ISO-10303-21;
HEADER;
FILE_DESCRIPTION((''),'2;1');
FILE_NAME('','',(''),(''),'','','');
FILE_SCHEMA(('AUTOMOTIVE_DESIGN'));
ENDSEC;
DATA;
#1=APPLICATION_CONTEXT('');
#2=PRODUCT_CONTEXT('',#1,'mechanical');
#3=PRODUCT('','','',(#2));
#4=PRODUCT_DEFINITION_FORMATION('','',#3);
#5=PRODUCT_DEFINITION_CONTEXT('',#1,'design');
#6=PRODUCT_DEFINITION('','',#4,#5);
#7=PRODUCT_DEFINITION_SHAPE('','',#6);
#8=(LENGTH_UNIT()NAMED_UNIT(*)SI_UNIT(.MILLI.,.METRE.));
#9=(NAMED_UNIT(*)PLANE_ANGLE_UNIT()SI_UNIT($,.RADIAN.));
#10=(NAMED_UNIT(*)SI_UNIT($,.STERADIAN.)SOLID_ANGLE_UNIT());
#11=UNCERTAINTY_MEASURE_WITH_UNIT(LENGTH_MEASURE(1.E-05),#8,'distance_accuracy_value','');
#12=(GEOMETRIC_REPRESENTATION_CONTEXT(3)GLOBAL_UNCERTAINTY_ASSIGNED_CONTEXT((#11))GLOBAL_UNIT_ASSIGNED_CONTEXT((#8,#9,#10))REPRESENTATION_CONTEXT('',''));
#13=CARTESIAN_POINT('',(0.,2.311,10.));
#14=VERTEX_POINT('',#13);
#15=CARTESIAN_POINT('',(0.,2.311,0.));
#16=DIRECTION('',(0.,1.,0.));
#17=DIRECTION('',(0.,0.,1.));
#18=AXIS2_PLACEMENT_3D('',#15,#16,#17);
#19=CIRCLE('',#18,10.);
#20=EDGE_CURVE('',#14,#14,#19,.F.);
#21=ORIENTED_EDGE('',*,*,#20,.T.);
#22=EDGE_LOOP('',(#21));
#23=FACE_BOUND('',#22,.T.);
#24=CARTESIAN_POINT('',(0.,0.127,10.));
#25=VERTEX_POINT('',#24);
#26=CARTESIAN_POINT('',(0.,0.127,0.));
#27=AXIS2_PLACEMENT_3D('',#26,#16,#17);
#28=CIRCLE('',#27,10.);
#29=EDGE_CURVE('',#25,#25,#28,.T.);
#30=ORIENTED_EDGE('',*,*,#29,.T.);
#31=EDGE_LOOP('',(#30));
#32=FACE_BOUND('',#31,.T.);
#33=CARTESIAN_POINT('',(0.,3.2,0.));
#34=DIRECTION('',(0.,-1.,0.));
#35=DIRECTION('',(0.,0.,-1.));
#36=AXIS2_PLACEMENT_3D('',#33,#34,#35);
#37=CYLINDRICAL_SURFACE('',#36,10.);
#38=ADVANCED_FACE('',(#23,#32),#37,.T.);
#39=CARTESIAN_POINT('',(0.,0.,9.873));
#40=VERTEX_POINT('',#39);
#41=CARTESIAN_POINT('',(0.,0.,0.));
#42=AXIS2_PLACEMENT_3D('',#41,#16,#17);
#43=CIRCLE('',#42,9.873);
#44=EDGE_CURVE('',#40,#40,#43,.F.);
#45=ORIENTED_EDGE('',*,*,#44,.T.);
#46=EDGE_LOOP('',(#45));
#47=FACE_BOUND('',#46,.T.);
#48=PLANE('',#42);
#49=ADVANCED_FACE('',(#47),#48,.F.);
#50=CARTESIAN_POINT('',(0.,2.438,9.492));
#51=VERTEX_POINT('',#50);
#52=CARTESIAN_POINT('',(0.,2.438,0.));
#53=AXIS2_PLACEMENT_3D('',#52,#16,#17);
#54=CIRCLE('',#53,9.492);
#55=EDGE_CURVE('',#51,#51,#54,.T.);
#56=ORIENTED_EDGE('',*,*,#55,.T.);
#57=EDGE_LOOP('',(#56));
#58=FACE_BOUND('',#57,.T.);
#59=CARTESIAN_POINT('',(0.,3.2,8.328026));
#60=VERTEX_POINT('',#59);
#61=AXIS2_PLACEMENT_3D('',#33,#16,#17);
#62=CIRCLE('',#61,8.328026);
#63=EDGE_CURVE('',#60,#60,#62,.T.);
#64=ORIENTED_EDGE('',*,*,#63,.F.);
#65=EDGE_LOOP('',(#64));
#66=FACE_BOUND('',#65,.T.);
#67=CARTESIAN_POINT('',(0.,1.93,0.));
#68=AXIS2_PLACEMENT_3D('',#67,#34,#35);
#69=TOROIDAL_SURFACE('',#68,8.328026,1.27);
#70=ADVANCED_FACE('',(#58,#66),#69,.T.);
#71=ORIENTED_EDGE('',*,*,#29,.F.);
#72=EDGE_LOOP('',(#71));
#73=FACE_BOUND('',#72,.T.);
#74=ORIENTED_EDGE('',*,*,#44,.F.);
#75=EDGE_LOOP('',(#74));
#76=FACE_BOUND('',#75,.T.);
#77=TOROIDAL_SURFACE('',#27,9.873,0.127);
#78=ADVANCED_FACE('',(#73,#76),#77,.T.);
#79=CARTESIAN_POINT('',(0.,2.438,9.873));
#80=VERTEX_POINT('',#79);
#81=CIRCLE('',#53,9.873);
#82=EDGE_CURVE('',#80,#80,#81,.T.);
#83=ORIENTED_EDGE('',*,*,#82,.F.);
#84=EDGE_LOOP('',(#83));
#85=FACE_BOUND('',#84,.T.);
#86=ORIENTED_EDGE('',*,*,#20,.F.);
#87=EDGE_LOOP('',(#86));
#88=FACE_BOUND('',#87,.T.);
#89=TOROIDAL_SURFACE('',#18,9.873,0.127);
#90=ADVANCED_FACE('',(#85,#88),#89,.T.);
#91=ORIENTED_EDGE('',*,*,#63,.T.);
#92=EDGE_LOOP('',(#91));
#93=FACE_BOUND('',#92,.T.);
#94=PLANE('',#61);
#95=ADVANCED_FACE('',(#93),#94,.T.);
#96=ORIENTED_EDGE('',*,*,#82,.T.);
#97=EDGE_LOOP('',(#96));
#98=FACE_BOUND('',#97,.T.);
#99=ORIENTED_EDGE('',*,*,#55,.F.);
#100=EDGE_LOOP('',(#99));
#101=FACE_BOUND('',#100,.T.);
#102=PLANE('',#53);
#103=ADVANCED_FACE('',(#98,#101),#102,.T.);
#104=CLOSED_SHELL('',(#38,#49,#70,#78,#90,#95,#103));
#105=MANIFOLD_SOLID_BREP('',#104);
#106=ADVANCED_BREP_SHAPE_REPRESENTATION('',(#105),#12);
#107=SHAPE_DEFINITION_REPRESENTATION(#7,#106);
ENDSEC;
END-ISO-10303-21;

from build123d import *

# Parameters (mm, degrees)
SKETCH1_R           = 10
BOSS_EXTRUDE1_DEPTH = 3.2
CUT_EXTRUDE1_START  = -0.762
SKETCH2_R           = 10
SKETCH2_R_2         = 9.492
CUT_EXTRUDE1_DEPTH  = 0.762
FILLET3_R           = 1.27
FILLET2_R           = 0.127


with BuildPart() as part:
    # Sketch1 → Boss-Extrude1 (new body)
    with BuildSketch(Plane(origin=(0, 0, 0), x_dir=(1, 0, 0), z_dir=(0, 1, 0))):
        with Locations(Location((0, 0, 0), (0, 0, 270))):
            Circle(SKETCH1_R)
    extrude(amount=BOSS_EXTRUDE1_DEPTH)

    # Sketch2 → Cut-Extrude1 (cut)
    with BuildSketch(Plane(origin=(0, 3.2, 0), x_dir=(1, 0, 0), z_dir=(0, 1, 0)).offset(CUT_EXTRUDE1_START)):
        with Locations(Location((0, 0, 0), (0, 0, 270))):
            Circle(SKETCH2_R)
        with Locations(Location((0, 0, 0), (0, 0, 270))):
            Circle(SKETCH2_R_2, mode=Mode.SUBTRACT)
    extrude(amount=CUT_EXTRUDE1_DEPTH, mode=Mode.SUBTRACT)

    # Fillet3
    # the kernel refuses this fillet: 1.27 mm, written as the material it takes off along each edge
    with BuildSketch(Plane(origin=(0, 3.2, 0), x_dir=(0, 0, 1), z_dir=(-1, 0, 0))) as fillet3_piece_1:
        with BuildLine():
            CenterArc((8.328025773, -1.27), FILLET3_R, 23.578178478, 66.421821522)
            Line((8.328025773, 0), (8.328025773, 0.0254))
            Line((8.328025773, 0.0254), (9.492, 0.0254))
            Line((9.492, 0.0254), (9.5174, 0))
            ThreePointArc((9.5174, 0), (9.5174, -0.381), (9.515279485, -0.75184))
            Line((9.515279485, -0.75184), (9.492, -0.762))
        make_face()
    revolve(axis=Axis((0, 3.2, 0), (0, 1, 0)), mode=Mode.SUBTRACT)

    # Fillet2
    fillet2_edges = [part.edges().sort_by_distance(p)[0] for p in [
        (0, 0, -10),
        (0, 2.438, -10),
    ]]
    fillet(fillet2_edges, radius=FILLET2_R)


solid = part.part
